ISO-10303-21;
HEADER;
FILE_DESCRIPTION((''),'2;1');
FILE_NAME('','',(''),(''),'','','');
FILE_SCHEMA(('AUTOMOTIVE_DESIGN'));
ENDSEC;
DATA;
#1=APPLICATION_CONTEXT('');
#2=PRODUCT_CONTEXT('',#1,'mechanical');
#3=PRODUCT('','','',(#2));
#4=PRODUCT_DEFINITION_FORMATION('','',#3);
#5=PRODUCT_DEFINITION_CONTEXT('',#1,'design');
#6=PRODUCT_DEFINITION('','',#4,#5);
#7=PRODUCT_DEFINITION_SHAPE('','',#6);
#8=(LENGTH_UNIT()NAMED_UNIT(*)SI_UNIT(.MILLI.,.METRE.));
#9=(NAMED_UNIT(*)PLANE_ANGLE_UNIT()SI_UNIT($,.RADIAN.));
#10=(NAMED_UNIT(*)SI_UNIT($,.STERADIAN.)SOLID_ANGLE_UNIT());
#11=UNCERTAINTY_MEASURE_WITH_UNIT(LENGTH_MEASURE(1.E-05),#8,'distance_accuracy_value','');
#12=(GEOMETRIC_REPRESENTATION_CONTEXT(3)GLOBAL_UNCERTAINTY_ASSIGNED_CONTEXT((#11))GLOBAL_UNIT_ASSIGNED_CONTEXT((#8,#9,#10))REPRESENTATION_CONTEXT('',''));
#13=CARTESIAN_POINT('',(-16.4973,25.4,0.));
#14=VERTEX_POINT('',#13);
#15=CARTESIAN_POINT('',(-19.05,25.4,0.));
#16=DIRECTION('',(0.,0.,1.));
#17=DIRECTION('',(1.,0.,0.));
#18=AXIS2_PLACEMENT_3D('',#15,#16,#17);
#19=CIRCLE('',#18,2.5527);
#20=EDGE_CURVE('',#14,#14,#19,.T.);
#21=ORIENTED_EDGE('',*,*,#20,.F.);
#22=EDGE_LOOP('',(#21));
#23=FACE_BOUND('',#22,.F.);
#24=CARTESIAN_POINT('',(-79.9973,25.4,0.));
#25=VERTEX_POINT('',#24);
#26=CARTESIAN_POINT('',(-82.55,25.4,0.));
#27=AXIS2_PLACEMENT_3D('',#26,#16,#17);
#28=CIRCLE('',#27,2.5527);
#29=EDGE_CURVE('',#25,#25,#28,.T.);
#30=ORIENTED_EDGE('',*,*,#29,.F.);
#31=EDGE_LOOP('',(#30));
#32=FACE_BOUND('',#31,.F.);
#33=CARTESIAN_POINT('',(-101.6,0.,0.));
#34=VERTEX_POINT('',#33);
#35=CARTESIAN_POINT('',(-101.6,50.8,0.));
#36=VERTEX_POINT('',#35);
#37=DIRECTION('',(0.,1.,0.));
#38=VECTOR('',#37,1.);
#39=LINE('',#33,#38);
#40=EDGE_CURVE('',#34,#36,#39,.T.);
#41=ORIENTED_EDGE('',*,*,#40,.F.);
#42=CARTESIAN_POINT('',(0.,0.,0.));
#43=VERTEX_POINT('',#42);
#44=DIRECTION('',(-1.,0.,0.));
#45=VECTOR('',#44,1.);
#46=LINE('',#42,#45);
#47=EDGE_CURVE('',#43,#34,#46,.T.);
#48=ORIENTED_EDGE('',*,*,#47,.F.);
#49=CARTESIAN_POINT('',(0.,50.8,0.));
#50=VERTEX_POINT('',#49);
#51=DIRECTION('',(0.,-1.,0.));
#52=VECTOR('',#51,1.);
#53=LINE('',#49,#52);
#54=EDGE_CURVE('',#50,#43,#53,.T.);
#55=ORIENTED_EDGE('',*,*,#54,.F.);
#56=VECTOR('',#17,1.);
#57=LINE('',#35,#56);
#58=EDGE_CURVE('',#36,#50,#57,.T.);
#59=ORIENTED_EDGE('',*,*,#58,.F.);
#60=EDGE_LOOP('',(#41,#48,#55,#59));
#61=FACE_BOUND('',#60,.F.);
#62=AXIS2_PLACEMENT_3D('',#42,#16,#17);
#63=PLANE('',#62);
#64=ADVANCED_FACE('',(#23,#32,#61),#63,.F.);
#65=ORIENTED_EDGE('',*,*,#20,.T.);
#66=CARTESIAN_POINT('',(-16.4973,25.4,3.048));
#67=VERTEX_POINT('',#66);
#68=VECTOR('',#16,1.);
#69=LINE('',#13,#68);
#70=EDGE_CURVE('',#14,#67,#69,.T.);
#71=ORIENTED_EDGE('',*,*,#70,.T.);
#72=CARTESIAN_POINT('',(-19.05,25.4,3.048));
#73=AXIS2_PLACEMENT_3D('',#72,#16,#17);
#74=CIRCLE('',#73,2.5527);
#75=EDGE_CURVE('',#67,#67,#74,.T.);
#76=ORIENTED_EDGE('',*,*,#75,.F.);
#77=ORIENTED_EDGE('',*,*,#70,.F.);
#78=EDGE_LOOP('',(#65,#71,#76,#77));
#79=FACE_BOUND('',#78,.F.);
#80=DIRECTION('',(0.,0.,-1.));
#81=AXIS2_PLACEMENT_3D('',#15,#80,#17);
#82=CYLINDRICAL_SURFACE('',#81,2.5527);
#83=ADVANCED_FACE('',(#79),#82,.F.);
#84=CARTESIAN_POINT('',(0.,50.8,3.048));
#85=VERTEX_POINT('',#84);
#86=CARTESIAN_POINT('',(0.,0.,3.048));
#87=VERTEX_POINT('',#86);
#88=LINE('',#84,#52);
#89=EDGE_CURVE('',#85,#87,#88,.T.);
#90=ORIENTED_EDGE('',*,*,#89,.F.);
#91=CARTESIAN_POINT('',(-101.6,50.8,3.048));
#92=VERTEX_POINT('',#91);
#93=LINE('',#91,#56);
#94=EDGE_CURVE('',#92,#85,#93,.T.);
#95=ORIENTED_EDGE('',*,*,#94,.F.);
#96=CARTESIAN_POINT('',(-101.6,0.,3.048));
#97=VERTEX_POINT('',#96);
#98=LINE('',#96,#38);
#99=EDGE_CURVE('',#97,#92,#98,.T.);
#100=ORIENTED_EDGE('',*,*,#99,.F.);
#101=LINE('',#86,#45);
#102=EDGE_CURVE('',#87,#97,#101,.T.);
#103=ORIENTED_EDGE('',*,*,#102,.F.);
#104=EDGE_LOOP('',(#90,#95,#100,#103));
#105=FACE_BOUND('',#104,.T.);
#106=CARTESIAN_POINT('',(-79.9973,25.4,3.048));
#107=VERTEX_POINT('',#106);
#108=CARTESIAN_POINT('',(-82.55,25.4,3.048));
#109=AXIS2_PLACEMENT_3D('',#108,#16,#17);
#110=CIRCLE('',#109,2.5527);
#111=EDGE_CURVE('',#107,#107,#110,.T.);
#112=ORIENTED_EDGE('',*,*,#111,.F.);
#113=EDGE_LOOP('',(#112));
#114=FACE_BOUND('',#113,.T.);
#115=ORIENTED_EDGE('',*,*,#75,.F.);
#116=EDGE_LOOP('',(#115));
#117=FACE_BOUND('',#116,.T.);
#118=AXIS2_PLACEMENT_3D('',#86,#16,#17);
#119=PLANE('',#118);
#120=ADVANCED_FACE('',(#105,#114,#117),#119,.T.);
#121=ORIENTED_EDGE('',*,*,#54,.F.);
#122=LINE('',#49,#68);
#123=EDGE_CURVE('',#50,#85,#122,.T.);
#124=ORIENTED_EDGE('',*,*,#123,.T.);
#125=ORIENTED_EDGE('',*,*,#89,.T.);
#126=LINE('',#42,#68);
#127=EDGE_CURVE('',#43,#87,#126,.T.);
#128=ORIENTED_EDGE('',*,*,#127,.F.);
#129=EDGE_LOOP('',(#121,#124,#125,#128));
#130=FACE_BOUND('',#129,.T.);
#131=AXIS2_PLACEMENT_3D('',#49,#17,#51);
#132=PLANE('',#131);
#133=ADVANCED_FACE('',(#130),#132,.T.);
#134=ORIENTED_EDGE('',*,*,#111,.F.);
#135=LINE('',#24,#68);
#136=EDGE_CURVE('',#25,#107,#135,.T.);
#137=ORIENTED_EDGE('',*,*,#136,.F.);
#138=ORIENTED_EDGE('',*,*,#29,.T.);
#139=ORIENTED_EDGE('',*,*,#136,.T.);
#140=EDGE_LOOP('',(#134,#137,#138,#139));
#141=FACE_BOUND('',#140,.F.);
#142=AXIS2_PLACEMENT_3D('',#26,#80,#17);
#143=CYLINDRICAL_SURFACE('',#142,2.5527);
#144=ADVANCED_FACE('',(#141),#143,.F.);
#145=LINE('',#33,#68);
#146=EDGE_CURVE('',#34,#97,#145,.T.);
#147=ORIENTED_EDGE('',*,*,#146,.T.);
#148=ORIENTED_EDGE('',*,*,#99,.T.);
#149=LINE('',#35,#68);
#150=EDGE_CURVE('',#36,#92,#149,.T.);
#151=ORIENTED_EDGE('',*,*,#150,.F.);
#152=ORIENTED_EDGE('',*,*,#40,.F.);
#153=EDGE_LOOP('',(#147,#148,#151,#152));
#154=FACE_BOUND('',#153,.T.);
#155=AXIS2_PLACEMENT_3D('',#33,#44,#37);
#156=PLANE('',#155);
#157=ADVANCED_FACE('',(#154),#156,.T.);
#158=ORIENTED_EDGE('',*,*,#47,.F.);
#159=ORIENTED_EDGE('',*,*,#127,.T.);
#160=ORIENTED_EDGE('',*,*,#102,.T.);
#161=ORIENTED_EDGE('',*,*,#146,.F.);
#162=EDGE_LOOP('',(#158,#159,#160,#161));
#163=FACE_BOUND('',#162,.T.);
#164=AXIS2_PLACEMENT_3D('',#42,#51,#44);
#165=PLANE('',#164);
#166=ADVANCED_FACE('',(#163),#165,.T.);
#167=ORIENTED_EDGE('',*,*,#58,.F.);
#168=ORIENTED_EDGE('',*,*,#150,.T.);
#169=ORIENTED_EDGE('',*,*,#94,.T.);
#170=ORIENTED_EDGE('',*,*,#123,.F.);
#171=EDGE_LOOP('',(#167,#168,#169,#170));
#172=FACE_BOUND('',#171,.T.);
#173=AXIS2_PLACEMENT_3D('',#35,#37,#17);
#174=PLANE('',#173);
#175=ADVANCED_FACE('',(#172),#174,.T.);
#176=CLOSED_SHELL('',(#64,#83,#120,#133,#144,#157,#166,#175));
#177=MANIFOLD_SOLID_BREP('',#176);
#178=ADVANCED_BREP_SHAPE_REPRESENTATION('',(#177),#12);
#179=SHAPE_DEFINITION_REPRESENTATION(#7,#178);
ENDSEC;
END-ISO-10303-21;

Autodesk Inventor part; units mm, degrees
ref_plane "YZ Plane" through (0, 0, 0) normal (1, 0, 0) x (0, 1, 0)
ref_plane "XZ Plane" through (0, 0, 0) normal (0, 1, 0) x (-1, 0, 0)
ref_plane "XY Plane" through (0, 0, 0) normal (0, 0, 1) x (1, 0, 0)
sketch "Sketch1" plane through (0, 0, 0) normal (0, 0, 1) x (1, 0, 0)
  line L0 (0, 0) -> (-101.6, 0)
  line L1 (-101.6, 0) -> (-101.6, 50.8)
  line L2 (-101.6, 50.8) -> (0, 50.8)
  line L3 (0, 50.8) -> (0, 0)
  circle A0 centre (-82.55, 25.4) radius 2.5527
  circle A1 centre (-19.05, 25.4) radius 2.5527
  dimension "holewidth" = 5.1054
  dimension "d1" = 5.1054
  dimension "d2" = 50.8
  dimension "d3" = 101.6
  dimension "d6" = 63.5
  dimension "d7" = 19.05
  dimension "d8" = 25.4
  dimension "d9" = 19.05
extrude "Plate1" add sketch "Sketch1" along normal blind 3.048
equation "\"d1\" = holewidth"
equation "\"BendRadius\" = Thickness"
equation "\"BendReliefWidth\" = Thickness"
equation "\"BendReliefDepth\" = 0.5 * Thickness"
equation "\"CornerReliefSize\" = 4 * Thickness"
equation "\"MinimumRemnant\" = 2 * Thickness"
equation "\"TransitionRadius\" = BendRadius"
equation "\"JacobiRadiusSize\" = BendRadius"
equation "\"GapSize\" = Thickness"
equation "\"d10\" = BendRadius"
equation "\"Thickness\" = 3.048"
properties part number "Nano Mounting Plate"
